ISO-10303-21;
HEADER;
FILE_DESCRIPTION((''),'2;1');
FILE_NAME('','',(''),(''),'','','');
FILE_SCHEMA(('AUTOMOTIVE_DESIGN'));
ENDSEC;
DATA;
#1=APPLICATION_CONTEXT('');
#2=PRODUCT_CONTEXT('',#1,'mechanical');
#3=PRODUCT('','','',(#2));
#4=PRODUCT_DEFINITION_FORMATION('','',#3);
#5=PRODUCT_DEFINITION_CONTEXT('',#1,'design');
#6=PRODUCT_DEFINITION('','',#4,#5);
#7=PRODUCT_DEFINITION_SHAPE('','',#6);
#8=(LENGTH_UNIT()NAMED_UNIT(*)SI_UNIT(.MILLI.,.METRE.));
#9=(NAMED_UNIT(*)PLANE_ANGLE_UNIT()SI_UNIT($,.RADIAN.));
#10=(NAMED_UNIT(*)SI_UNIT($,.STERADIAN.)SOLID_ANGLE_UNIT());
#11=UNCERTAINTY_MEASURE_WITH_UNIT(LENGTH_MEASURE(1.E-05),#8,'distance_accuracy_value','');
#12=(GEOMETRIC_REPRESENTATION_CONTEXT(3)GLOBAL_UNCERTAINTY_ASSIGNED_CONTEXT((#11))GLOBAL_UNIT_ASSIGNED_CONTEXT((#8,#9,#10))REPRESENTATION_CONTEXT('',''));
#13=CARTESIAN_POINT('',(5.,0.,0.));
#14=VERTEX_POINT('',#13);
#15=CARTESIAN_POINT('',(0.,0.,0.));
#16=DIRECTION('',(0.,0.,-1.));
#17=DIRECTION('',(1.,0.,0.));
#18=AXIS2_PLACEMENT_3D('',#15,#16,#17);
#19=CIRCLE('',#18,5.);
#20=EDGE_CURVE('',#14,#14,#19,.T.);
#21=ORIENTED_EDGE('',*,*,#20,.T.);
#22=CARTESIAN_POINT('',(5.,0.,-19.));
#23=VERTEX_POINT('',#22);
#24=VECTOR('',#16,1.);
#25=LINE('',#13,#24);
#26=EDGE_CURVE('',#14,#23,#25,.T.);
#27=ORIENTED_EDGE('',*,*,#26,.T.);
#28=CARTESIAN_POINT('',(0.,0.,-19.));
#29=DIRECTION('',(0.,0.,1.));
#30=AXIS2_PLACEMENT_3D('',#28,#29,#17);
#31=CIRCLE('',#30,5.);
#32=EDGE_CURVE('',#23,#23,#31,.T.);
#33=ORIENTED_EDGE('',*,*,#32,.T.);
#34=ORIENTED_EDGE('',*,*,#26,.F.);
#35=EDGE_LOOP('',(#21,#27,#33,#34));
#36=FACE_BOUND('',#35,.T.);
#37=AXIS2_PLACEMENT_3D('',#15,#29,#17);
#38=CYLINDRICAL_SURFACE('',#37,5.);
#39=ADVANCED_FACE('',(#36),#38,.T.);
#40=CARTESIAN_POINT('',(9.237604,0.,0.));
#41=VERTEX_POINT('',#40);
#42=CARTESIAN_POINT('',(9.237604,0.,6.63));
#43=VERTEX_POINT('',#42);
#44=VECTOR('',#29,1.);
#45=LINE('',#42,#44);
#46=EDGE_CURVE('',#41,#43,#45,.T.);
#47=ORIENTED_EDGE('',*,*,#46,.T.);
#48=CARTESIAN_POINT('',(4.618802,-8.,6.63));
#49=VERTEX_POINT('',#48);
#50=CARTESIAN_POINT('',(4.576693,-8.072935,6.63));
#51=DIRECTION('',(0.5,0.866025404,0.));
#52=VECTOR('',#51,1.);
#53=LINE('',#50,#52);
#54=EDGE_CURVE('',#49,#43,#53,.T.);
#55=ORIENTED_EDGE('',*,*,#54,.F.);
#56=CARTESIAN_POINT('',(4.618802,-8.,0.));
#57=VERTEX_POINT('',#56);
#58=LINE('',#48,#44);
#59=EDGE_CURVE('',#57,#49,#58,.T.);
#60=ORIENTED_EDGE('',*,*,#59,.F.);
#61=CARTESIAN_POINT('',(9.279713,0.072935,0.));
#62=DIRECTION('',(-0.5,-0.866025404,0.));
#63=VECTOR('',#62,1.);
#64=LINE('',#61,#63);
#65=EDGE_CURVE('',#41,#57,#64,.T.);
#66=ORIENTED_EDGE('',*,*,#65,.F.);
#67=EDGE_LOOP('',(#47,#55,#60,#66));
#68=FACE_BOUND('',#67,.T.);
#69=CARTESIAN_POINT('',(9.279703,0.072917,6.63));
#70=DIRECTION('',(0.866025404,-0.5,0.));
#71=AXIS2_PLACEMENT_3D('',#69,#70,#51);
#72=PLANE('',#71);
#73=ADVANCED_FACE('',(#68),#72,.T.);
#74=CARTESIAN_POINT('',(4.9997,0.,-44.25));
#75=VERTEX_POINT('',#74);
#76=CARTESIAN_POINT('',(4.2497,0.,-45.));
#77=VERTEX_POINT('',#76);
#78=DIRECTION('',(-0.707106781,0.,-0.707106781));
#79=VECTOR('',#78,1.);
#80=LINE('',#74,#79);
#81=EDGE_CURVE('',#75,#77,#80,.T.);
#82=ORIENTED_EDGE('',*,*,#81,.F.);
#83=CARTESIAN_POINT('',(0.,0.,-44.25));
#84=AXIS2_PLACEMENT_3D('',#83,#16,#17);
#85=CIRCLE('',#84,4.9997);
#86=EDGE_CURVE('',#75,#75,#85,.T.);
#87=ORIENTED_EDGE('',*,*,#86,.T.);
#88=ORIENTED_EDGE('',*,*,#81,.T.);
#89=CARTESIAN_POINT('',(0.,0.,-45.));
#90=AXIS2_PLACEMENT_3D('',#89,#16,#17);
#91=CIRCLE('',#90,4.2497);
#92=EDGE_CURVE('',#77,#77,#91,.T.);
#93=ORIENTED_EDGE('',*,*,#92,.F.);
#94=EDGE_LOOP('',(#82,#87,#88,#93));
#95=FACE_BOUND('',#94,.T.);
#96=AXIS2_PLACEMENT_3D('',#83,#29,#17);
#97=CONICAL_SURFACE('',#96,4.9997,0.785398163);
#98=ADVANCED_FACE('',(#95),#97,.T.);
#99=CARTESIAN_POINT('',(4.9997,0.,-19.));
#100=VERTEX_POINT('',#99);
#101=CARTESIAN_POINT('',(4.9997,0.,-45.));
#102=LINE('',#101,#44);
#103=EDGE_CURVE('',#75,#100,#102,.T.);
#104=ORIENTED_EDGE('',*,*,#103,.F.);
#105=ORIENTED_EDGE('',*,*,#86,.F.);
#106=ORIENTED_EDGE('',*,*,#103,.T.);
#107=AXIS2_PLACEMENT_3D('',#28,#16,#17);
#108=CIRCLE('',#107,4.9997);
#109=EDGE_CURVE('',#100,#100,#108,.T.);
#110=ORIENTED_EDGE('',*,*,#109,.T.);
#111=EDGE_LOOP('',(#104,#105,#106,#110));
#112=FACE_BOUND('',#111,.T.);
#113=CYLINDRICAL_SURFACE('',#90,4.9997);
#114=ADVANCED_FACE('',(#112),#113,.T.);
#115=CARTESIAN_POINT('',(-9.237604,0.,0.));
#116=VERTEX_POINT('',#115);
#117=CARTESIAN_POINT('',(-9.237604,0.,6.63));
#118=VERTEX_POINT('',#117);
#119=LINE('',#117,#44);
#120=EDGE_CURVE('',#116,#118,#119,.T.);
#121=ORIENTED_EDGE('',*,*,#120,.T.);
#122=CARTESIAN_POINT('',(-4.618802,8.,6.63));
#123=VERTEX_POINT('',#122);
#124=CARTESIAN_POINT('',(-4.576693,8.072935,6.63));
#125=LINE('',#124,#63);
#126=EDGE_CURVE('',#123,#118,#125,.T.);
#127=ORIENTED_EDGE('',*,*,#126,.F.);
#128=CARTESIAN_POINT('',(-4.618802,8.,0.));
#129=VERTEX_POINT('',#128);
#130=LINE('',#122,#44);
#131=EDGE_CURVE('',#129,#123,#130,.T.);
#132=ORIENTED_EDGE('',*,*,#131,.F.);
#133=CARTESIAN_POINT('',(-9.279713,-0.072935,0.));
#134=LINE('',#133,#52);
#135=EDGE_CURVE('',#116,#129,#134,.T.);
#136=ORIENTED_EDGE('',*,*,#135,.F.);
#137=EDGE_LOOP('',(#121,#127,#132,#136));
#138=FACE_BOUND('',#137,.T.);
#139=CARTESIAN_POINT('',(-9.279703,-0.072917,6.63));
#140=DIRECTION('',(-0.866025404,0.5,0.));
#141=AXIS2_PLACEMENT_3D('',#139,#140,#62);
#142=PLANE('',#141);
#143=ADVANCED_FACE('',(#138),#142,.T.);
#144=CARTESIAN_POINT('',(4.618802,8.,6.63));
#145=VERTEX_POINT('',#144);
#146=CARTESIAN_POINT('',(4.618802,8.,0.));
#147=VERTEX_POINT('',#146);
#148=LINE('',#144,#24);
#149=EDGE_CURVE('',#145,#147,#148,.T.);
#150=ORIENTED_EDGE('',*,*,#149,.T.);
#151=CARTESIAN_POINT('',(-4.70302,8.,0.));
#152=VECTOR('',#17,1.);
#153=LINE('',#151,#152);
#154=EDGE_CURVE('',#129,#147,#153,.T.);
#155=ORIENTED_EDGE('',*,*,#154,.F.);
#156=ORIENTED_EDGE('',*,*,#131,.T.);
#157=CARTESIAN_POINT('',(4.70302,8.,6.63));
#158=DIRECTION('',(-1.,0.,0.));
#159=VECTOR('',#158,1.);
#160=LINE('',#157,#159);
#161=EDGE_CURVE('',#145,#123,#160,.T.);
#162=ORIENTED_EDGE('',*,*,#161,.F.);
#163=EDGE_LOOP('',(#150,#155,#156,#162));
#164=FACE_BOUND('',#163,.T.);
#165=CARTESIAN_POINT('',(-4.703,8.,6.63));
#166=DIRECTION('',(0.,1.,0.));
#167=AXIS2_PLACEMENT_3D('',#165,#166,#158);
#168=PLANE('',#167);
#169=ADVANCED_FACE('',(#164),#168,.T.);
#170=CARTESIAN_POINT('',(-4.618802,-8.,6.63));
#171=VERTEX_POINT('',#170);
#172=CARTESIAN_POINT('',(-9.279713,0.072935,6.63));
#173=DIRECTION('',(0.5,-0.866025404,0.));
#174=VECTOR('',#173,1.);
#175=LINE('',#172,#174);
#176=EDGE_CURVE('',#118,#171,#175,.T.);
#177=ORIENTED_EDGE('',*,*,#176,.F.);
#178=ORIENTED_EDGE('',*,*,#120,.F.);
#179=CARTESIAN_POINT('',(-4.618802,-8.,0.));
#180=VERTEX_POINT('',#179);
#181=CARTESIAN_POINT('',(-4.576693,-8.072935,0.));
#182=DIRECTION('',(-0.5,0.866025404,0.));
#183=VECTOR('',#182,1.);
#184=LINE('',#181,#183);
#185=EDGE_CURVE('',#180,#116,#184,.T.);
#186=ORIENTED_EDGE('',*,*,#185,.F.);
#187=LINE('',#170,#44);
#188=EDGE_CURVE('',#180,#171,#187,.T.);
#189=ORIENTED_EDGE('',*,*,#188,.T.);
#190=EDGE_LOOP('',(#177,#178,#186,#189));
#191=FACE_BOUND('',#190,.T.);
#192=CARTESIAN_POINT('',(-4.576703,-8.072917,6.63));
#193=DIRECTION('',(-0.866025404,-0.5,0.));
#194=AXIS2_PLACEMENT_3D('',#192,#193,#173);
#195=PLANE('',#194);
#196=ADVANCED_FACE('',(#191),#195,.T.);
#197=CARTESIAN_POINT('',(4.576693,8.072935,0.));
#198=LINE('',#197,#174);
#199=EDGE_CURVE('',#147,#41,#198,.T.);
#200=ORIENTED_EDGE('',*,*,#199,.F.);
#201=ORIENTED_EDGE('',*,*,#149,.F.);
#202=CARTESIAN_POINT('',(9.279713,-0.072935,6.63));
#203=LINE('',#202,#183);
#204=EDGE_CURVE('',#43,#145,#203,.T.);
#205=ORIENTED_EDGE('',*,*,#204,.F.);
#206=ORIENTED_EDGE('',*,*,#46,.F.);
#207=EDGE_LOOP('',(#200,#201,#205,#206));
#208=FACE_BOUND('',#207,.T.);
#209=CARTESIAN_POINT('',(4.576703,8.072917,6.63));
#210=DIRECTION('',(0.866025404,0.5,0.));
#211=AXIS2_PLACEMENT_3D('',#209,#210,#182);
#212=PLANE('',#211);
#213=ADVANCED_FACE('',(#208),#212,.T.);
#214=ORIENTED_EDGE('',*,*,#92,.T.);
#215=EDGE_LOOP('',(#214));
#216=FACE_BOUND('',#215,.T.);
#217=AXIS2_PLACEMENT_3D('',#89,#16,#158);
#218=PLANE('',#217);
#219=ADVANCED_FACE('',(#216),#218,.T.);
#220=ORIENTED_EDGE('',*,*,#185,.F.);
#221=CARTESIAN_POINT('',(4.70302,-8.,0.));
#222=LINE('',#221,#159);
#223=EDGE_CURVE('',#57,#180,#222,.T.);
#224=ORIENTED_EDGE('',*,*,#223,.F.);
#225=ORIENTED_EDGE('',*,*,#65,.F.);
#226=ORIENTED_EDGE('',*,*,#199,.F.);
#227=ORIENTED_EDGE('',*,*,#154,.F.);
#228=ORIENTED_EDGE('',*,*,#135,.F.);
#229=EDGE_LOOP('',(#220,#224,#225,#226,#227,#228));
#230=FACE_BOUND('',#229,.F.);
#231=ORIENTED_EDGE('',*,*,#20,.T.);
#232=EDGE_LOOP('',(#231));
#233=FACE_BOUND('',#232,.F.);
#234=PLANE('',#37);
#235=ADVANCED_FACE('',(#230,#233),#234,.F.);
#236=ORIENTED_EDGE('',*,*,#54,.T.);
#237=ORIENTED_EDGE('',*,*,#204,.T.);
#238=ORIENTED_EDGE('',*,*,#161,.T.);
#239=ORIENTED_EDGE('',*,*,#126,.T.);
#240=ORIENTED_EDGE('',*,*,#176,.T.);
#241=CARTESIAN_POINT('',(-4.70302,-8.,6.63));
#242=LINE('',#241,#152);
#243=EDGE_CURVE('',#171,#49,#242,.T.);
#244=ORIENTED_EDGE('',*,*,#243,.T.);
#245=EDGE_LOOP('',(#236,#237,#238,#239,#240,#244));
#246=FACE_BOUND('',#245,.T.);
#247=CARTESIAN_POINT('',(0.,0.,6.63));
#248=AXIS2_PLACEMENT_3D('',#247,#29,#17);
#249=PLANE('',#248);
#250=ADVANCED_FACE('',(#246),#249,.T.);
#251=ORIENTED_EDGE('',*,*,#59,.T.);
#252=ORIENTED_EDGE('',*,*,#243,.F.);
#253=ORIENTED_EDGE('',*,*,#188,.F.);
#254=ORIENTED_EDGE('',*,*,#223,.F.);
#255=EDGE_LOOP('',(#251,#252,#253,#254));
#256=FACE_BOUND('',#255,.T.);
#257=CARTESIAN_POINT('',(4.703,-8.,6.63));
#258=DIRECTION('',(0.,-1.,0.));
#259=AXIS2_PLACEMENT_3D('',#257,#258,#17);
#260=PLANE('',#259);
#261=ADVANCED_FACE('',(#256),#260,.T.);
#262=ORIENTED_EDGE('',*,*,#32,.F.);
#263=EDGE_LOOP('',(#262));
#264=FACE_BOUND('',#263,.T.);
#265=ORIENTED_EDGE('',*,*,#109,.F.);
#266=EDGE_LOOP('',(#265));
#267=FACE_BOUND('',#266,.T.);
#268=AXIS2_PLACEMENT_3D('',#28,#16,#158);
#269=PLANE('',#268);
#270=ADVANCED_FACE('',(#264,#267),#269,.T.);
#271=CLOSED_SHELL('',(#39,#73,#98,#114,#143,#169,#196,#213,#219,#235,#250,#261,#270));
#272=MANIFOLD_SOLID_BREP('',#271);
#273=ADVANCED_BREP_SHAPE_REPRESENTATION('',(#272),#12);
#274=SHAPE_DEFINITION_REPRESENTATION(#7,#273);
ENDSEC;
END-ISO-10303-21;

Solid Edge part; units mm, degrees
sketch "Sketch1" plane through (0, 0, 0) normal (0, 0, 1) x (1, 0, 0)
  circle A0 centre (0, 0) radius 9.28
  dimension "D1" = 18.56
extrude "Protrusion1" add sketch "Sketch1" along normal blind 6.63
sketch "Sketch2" plane through (0, 0, 0) normal (0, 0, -1) x (1, 0, 0)
  circle A0 centre (0, 0) radius 5
extrude "Protrusion2" add sketch "Sketch2" along normal blind 45
sketch "Sketch3" plane through (0, 0, -45) normal (0, 0, -1) x (1, 0, 0)
  circle A0 centre (0, 0) radius 4.9997
extrude "Cutout1" cut sketch "Sketch3" against normal blind 26 flip side to cut
chamfer "Chamfer_1" distance 0.75 angle 45 1 edges at (-4.9997, 0, -45)
sketch "Sketch4" plane through (0, 0, 6.63) normal (0, 0, 1) x (1, 0, 0)
  line L0 (-4.703, 8) -> (4.703, 8)
  dimension "D1" = 16
extrude "Cutout2" cut sketch "Sketch4" against normal up to next material side at (0, 8.05, 6.63)
pattern_circular "Pattern1" count 6 over 360 about axis through (0, 0, 6.63) along (0, 0, 1) of "Cutout2"
properties part number "24104718"
